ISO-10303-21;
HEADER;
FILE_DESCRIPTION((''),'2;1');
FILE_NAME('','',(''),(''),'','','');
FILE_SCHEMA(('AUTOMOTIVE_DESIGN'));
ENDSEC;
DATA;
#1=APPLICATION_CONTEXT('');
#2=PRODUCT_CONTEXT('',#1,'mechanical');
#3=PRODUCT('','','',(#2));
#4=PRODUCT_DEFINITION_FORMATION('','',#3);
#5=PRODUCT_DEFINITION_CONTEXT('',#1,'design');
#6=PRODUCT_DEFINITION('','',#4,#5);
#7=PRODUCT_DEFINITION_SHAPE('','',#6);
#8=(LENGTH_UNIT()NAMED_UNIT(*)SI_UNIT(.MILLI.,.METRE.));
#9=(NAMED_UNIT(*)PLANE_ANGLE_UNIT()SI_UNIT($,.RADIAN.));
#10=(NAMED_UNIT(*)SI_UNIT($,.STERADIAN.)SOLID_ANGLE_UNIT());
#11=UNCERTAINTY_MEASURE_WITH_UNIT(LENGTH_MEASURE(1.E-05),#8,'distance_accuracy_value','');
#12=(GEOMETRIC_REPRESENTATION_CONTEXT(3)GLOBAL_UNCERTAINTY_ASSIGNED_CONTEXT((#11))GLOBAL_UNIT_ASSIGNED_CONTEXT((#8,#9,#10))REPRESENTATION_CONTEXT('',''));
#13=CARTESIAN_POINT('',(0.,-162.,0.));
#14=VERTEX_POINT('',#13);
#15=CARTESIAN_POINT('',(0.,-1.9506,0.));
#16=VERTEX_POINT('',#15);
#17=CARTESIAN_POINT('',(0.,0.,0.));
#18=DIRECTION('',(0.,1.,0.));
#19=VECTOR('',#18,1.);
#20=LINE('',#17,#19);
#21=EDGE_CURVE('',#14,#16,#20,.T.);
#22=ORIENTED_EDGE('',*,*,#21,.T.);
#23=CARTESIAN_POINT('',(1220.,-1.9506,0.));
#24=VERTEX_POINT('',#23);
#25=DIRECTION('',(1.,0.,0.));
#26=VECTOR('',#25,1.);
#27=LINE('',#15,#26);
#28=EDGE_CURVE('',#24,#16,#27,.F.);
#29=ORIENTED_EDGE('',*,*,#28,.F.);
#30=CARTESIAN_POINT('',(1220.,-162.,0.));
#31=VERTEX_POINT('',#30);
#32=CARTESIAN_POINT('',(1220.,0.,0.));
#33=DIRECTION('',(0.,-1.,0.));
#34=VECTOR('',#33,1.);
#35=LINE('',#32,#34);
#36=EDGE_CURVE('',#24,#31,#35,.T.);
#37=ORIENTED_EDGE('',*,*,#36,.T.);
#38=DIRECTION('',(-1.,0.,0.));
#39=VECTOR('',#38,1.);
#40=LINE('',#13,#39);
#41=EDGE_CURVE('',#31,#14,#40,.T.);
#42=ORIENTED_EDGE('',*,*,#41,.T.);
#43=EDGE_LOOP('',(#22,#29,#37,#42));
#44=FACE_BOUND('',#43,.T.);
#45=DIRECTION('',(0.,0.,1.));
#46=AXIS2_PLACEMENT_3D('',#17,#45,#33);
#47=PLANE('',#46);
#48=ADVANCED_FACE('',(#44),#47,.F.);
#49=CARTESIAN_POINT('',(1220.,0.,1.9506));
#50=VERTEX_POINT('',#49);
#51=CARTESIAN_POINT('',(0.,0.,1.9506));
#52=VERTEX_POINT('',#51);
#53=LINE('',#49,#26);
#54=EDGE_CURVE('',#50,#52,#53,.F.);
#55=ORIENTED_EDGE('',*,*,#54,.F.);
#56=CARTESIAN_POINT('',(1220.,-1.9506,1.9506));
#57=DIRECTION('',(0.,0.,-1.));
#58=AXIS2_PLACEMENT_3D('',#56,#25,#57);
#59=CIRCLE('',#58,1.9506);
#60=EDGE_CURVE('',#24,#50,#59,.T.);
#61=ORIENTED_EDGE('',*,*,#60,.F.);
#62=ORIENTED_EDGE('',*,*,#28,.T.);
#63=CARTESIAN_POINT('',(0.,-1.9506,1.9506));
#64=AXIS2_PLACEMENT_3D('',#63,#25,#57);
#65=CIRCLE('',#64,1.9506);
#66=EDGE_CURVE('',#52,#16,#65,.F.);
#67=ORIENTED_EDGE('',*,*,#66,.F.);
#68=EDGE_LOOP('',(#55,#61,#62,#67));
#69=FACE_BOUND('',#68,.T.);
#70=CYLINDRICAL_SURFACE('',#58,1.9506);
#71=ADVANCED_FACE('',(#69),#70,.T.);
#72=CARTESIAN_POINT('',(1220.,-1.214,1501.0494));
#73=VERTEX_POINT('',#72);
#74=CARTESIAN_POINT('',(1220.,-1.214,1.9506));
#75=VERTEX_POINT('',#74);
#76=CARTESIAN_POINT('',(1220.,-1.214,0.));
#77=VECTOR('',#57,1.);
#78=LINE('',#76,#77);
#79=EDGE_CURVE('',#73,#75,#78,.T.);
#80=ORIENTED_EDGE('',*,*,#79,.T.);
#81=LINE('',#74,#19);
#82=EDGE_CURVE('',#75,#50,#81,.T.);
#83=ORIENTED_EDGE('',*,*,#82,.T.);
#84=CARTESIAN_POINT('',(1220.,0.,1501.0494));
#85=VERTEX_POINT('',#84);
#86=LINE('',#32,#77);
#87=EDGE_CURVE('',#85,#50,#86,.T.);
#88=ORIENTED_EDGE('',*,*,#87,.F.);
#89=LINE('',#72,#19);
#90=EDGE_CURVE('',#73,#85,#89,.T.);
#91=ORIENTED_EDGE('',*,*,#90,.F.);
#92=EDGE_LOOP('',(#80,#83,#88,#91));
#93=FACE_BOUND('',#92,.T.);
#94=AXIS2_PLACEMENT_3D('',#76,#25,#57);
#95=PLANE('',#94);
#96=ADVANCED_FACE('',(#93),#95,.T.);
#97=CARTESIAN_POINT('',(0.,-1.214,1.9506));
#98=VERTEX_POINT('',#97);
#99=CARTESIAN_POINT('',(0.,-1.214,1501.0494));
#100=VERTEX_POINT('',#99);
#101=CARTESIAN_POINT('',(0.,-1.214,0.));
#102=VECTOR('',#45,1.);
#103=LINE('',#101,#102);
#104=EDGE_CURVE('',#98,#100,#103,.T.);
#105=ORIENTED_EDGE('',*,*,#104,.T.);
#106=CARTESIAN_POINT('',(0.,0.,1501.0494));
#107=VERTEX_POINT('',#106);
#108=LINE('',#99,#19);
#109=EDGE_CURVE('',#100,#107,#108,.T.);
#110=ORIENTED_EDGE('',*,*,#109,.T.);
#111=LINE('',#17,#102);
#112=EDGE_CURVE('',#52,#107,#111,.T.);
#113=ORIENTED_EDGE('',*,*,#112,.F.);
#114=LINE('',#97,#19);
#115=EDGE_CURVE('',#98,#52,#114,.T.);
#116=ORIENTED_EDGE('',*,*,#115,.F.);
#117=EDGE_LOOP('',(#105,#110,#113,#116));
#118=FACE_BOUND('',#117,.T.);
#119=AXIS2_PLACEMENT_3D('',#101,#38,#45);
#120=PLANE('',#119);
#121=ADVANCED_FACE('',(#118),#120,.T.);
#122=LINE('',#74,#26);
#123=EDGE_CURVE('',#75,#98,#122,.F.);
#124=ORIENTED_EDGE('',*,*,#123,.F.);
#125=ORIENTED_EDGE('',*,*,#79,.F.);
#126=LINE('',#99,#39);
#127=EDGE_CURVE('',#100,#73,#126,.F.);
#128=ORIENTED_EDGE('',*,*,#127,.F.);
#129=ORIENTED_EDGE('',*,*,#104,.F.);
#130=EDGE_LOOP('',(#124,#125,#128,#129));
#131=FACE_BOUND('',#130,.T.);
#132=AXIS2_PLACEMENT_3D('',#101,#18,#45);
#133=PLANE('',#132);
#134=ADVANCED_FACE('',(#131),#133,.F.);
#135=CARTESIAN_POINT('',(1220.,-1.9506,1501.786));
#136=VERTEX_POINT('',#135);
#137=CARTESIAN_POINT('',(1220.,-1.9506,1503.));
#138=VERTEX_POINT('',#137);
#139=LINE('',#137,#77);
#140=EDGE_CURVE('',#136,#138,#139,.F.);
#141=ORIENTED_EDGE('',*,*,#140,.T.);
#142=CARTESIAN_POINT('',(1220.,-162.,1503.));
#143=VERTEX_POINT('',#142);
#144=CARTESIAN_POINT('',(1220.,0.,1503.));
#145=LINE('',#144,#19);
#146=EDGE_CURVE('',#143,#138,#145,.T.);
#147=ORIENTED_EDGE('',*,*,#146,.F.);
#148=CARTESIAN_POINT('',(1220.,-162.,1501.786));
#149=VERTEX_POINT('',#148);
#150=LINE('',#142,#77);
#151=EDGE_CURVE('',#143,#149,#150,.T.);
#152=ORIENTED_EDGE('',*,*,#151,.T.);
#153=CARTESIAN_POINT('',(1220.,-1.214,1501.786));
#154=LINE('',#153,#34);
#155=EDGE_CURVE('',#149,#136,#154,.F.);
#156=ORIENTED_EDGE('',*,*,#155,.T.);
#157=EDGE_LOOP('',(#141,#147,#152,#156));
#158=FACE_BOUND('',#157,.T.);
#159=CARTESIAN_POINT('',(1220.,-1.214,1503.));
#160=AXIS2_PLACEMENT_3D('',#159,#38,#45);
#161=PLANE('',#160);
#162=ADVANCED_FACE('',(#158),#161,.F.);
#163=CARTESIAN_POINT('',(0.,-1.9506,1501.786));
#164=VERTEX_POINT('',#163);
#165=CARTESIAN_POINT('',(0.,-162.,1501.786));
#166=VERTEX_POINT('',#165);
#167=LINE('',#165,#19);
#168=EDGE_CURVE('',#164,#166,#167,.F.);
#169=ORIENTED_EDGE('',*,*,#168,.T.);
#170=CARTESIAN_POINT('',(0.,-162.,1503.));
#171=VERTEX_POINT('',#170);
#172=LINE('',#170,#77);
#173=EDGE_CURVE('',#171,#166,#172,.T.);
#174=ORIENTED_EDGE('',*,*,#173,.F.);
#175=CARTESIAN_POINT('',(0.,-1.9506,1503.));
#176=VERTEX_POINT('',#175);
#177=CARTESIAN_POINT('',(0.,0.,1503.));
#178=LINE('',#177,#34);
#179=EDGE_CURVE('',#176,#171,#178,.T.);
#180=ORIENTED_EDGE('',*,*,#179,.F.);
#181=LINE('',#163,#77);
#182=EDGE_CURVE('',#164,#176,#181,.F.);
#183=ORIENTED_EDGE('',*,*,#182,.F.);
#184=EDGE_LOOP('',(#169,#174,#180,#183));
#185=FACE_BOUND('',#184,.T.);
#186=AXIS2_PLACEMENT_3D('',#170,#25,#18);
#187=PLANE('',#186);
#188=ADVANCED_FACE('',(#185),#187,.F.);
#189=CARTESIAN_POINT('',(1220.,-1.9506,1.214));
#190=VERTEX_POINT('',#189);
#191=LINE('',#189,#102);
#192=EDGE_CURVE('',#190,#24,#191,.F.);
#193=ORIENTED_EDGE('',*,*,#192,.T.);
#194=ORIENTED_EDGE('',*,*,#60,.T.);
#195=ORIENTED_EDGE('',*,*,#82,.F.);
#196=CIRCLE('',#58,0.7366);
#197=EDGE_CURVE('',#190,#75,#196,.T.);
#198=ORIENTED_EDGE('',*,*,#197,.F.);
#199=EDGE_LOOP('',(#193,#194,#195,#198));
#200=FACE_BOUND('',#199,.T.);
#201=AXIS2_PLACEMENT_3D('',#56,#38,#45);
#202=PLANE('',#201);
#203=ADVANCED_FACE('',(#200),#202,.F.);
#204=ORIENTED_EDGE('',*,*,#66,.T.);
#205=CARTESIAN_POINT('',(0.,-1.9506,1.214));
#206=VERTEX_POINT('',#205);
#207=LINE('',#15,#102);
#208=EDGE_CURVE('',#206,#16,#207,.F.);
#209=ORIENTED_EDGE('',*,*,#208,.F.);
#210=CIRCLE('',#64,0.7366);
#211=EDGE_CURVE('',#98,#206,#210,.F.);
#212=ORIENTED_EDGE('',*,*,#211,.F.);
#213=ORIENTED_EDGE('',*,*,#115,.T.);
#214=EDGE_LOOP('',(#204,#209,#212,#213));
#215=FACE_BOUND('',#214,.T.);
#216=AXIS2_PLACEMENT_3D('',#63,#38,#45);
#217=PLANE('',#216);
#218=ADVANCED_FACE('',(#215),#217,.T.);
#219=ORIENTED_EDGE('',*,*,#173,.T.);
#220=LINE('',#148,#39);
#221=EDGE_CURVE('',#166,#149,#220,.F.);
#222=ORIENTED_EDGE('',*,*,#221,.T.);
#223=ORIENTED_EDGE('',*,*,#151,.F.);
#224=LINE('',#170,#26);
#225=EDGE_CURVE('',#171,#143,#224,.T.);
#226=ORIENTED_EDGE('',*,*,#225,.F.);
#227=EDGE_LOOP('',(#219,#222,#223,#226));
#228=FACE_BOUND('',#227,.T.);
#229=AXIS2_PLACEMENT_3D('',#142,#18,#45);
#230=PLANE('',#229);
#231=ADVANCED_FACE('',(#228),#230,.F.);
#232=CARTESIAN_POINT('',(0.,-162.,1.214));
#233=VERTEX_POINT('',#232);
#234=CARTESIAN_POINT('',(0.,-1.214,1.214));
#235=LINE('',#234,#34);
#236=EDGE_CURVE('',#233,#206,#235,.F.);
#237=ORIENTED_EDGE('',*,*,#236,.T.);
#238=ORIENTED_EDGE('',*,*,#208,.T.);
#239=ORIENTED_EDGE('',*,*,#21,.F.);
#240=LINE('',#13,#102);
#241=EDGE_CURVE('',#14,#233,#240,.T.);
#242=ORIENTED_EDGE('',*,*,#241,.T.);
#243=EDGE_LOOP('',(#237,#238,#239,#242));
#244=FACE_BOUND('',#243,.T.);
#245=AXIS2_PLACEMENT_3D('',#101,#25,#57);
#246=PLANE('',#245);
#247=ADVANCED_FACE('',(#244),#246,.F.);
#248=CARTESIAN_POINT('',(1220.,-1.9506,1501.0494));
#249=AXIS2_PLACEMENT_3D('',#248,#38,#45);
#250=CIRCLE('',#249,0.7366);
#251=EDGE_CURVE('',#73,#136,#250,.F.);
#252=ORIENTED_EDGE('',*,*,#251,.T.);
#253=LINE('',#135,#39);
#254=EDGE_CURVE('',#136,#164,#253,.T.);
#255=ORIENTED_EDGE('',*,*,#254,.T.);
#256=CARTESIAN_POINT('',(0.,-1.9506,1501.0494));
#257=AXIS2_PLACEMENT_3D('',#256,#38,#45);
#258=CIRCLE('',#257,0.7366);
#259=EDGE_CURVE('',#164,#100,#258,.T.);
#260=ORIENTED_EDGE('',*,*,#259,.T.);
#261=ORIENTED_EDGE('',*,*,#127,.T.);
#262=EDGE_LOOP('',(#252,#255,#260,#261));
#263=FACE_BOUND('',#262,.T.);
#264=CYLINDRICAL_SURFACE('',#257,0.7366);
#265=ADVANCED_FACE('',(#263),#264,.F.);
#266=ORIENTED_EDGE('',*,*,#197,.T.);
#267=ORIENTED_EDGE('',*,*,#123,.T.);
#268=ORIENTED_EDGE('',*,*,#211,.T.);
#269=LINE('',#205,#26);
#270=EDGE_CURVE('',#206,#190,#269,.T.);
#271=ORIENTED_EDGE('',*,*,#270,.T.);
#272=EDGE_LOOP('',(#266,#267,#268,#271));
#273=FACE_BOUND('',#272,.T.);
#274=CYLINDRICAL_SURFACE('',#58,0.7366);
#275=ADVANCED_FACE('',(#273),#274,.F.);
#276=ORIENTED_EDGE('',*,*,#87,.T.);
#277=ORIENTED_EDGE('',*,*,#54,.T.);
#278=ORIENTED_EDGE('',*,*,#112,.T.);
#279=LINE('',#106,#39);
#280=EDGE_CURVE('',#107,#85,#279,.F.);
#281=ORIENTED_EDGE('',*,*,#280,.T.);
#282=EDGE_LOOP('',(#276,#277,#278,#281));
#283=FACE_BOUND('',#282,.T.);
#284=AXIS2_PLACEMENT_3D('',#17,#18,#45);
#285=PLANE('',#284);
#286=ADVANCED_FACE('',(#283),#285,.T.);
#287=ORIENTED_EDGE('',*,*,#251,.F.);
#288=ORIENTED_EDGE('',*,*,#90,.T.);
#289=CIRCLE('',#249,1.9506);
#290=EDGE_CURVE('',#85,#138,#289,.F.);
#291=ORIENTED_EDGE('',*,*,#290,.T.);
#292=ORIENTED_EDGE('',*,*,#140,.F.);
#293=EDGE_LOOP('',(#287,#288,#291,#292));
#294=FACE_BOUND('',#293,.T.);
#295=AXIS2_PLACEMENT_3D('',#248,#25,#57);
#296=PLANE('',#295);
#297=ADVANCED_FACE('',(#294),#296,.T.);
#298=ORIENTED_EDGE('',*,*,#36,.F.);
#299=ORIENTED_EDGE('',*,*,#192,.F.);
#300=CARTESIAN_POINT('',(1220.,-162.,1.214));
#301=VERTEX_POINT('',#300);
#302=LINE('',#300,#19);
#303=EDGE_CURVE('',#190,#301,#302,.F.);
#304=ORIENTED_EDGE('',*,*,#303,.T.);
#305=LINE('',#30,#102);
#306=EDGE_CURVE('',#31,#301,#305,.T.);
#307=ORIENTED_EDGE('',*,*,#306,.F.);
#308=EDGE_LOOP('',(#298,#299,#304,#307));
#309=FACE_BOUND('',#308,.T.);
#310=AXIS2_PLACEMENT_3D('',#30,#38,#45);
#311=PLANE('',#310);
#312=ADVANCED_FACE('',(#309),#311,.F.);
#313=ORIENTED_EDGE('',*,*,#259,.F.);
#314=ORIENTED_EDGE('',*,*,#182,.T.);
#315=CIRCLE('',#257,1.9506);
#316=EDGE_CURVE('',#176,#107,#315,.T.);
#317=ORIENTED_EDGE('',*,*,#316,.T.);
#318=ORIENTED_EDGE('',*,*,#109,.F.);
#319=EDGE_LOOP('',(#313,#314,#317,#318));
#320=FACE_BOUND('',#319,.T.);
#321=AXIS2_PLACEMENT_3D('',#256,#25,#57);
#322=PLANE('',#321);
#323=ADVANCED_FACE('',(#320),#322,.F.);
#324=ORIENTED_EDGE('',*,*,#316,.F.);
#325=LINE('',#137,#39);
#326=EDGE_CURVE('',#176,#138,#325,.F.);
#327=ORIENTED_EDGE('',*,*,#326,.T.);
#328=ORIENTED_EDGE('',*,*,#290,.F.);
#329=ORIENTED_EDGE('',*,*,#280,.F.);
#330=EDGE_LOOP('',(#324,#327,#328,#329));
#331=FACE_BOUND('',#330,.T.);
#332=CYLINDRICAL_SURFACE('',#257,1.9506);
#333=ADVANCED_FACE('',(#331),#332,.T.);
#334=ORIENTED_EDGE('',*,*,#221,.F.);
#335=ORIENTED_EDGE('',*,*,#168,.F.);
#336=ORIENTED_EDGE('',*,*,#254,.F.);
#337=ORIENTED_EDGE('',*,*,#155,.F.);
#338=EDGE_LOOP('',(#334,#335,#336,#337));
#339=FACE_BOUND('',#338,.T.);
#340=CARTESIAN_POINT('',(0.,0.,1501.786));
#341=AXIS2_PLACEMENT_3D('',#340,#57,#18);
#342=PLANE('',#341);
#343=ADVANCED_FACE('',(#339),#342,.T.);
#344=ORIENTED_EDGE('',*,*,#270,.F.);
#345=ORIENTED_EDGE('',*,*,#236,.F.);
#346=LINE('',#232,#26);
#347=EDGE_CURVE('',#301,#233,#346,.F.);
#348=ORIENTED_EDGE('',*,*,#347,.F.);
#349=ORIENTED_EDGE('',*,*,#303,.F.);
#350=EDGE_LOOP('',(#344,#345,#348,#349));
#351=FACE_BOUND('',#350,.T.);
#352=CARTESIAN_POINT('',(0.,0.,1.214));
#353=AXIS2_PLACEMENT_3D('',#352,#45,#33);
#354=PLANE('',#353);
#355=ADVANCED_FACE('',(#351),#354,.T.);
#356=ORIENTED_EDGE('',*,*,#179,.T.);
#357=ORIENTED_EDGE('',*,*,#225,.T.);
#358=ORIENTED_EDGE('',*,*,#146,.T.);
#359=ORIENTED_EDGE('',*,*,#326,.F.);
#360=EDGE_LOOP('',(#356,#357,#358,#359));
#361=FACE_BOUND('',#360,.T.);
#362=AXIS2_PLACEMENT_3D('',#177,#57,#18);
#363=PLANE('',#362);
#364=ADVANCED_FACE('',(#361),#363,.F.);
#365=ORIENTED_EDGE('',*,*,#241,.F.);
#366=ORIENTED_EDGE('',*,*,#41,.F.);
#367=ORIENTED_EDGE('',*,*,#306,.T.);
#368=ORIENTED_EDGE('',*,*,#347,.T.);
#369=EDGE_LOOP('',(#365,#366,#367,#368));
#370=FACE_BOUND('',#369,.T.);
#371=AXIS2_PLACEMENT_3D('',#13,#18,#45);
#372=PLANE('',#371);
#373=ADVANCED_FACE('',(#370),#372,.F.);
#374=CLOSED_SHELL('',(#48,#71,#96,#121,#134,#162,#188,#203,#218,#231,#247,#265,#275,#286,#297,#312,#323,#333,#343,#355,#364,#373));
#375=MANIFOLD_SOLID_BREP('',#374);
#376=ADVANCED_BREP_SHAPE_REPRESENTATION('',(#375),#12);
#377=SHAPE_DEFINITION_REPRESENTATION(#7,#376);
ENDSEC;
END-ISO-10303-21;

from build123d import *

# Parameters (mm, degrees)
CROQUIS1_W                         = 1220
CROQUIS1_H                         = 1503
BRIDA_BASE1_DEPTH                  = 1.214
BRIDA_DE_ARISTA1_STRIP_W           = 6.3292
BRIDA_DE_ARISTA1_STRIP_H           = 1.214
BRIDA_DE_ARISTA1_STRIP_CUT_DEPTH   = 1220
BRIDA_DE_ARISTA1_STRIP_2_W         = 6.3292
BRIDA_DE_ARISTA1_STRIP_2_H         = 1.214
BRIDA_DE_ARISTA1_STRIP_CUT_2_DEPTH = 1220
BRIDA_DE_ARISTA1_DEPTH             = 1220
BRIDA_DE_ARISTA1_BEND_DEPTH        = 1220


# Sheet-metal steps are written as plain solids
with BuildPart() as part:
    # Croquis1 → Brida base1 (new body)
    with BuildSketch(Plane(origin=(0, 0, 0), x_dir=(1, 0, 0), z_dir=(0, 1, 0))):
        with Locations((610, -751.5)):
            Rectangle(CROQUIS1_W, CROQUIS1_H)
    extrude(amount=-BRIDA_BASE1_DEPTH)

    # Brida de arista1 strip (across the edge) → Brida de arista1 strip cut (cut)
    with BuildSketch(Plane(origin=(0, -1.214, 0), x_dir=(0, 0, 1), z_dir=(1, 0, 0))):
        with Locations((-1.214, -0.607)):
            Rectangle(BRIDA_DE_ARISTA1_STRIP_W, BRIDA_DE_ARISTA1_STRIP_H)
    extrude(amount=BRIDA_DE_ARISTA1_STRIP_CUT_DEPTH, mode=Mode.SUBTRACT)

    # Brida de arista1 strip 2 (across the edge) → Brida de arista1 strip cut 2 (cut)
    with BuildSketch(Plane(origin=(1220, -1.214, 1503), x_dir=(0, 0, -1), z_dir=(-1, 0, 0))):
        with Locations((-1.214, -0.607)):
            Rectangle(BRIDA_DE_ARISTA1_STRIP_2_W, BRIDA_DE_ARISTA1_STRIP_2_H)
    extrude(amount=BRIDA_DE_ARISTA1_STRIP_CUT_2_DEPTH, mode=Mode.SUBTRACT)

    # Brida de arista1 section (across the edge) → Brida de arista1 (add)
    with BuildSketch(Plane(origin=(0, -1.214, 0), x_dir=(0, 0, 1), z_dir=(1, 0, 0))):
        with BuildLine():
            Line((0, 0.7366), (0, 160.786))
            Line((0, 160.786), (1.214, 160.786))
            Line((1.214, 160.786), (1.214, 0.7366))
            ThreePointArc((1.214, 0.7366), (1.429745145, 0.215745145), (1.9506, 0))
            Line((1.9506, 0), (1.9506, -1.214))
            ThreePointArc((1.9506, -1.214), (0.571317513, -0.642682487), (0, 0.7366))
        make_face()
    extrude(amount=BRIDA_DE_ARISTA1_DEPTH)

    # Brida de arista1 section 2 (across the edge) → Brida de arista1 bend (add)
    with BuildSketch(Plane(origin=(1220, -1.214, 1503), x_dir=(0, 0, -1), z_dir=(-1, 0, 0))):
        with BuildLine():
            Line((0, 0.7366), (0, 160.786))
            Line((0, 160.786), (1.214, 160.786))
            Line((1.214, 160.786), (1.214, 0.7366))
            ThreePointArc((1.214, 0.7366), (1.429745145, 0.215745145), (1.9506, 0))
            Line((1.9506, 0), (1.9506, -1.214))
            ThreePointArc((1.9506, -1.214), (0.571317513, -0.642682487), (0, 0.7366))
        make_face()
    extrude(amount=BRIDA_DE_ARISTA1_BEND_DEPTH)


solid = part.part
